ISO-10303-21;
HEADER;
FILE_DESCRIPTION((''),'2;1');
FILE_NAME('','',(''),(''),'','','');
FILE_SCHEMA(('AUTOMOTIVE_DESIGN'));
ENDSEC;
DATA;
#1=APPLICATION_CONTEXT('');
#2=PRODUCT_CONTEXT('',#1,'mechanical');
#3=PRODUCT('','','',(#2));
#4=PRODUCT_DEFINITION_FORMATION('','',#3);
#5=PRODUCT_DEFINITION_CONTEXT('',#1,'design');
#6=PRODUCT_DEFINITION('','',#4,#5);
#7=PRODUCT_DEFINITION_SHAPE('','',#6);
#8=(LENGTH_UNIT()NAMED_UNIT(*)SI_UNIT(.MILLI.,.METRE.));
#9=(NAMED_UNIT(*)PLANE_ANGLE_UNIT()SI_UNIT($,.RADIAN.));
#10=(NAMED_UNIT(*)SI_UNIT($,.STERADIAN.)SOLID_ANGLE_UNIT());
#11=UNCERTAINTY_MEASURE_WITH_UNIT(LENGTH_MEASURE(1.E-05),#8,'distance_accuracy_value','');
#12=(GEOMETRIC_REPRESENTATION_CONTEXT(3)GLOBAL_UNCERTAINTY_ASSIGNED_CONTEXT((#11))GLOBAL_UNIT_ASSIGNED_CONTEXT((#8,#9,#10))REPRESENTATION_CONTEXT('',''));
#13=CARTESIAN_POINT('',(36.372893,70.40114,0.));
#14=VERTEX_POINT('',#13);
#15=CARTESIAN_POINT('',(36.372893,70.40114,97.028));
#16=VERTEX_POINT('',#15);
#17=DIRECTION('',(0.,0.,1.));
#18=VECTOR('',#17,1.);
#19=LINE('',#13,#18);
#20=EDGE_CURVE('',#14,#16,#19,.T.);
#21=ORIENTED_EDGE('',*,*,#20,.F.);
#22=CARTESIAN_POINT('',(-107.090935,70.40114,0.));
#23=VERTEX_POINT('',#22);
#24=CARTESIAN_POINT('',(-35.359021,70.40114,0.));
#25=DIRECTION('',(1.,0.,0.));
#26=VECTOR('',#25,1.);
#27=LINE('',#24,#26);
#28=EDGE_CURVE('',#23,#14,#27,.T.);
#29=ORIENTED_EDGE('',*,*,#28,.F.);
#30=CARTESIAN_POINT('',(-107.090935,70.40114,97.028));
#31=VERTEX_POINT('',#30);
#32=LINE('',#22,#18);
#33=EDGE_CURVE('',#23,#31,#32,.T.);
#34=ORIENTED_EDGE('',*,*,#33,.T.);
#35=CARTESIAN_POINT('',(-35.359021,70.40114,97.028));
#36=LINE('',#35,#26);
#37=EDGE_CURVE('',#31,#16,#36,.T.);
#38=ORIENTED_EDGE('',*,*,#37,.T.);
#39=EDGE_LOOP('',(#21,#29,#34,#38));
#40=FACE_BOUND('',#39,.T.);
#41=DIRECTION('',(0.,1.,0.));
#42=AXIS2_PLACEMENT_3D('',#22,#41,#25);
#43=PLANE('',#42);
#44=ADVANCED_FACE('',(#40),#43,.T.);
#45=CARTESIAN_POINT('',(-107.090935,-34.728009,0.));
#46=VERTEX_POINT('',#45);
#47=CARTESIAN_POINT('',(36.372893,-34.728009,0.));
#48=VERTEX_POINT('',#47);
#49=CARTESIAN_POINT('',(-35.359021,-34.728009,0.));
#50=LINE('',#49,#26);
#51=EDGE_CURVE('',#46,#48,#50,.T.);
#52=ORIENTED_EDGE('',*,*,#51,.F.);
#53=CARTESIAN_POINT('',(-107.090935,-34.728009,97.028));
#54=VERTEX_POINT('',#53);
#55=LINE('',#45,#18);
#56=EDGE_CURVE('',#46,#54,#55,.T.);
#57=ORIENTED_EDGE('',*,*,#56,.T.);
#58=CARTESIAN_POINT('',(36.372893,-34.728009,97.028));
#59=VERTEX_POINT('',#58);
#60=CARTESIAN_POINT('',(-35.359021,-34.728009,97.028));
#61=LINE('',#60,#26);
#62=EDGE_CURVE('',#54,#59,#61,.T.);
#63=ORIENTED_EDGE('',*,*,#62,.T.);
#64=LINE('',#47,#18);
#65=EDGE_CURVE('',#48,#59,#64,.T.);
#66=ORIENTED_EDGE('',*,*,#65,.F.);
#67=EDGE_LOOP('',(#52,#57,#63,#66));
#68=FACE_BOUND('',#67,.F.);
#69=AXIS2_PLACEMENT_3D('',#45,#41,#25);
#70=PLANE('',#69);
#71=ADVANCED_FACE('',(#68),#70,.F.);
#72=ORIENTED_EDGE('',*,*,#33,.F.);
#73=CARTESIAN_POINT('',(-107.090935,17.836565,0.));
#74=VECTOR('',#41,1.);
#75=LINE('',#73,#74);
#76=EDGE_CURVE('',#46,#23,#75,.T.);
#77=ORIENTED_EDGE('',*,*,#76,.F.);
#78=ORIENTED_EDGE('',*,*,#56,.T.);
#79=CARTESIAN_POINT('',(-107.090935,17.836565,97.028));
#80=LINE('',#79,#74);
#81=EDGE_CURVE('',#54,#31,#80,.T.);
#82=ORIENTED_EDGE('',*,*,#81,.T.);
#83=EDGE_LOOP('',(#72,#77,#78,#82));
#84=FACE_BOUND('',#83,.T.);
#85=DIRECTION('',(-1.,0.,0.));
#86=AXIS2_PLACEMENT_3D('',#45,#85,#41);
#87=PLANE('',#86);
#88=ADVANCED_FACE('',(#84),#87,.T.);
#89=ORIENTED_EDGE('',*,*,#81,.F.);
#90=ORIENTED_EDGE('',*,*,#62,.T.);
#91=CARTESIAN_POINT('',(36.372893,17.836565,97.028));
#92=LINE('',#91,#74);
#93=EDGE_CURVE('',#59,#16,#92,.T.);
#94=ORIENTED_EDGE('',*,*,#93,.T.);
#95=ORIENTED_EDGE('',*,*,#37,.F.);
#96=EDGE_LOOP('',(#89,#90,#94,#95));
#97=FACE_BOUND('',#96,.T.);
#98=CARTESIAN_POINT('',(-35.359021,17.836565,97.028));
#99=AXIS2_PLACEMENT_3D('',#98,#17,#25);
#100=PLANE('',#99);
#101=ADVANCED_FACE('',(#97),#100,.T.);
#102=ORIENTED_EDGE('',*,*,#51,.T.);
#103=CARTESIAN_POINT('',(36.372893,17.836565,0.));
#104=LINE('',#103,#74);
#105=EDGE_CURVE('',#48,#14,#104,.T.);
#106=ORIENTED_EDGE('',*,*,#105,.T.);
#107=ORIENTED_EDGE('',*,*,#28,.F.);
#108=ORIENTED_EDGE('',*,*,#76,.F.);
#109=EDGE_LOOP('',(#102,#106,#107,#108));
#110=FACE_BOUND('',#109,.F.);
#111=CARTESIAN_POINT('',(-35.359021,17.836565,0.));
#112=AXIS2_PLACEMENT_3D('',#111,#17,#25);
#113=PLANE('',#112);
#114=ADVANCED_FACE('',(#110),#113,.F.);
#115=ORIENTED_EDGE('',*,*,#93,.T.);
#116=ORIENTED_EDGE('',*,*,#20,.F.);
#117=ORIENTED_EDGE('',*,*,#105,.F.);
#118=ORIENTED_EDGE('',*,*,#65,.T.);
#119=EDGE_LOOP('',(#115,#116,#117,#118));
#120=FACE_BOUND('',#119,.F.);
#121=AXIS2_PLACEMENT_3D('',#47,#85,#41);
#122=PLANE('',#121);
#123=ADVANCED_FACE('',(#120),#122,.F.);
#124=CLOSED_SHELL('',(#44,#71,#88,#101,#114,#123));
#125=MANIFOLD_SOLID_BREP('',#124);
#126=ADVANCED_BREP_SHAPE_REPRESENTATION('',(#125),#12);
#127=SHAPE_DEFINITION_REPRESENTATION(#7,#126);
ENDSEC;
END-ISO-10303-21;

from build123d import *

# Parameters (mm, degrees)
F0_W     = 143.4638276696
F0_H     = 105.1291488111
F1_DEPTH = 97.028


# Not quite as in the source:
# - a feature of the source that left no trace in its solid (it failed there, or was rolled back) is left out


with BuildPart() as f1:
    # F0 (on Top) → F1 (new body)
    with BuildSketch(Plane.XY):
        with Locations((-35.3590212762, 17.8365651518)):
            Rectangle(F0_W, F0_H)
    extrude(amount=F1_DEPTH)


solid = f1.part
